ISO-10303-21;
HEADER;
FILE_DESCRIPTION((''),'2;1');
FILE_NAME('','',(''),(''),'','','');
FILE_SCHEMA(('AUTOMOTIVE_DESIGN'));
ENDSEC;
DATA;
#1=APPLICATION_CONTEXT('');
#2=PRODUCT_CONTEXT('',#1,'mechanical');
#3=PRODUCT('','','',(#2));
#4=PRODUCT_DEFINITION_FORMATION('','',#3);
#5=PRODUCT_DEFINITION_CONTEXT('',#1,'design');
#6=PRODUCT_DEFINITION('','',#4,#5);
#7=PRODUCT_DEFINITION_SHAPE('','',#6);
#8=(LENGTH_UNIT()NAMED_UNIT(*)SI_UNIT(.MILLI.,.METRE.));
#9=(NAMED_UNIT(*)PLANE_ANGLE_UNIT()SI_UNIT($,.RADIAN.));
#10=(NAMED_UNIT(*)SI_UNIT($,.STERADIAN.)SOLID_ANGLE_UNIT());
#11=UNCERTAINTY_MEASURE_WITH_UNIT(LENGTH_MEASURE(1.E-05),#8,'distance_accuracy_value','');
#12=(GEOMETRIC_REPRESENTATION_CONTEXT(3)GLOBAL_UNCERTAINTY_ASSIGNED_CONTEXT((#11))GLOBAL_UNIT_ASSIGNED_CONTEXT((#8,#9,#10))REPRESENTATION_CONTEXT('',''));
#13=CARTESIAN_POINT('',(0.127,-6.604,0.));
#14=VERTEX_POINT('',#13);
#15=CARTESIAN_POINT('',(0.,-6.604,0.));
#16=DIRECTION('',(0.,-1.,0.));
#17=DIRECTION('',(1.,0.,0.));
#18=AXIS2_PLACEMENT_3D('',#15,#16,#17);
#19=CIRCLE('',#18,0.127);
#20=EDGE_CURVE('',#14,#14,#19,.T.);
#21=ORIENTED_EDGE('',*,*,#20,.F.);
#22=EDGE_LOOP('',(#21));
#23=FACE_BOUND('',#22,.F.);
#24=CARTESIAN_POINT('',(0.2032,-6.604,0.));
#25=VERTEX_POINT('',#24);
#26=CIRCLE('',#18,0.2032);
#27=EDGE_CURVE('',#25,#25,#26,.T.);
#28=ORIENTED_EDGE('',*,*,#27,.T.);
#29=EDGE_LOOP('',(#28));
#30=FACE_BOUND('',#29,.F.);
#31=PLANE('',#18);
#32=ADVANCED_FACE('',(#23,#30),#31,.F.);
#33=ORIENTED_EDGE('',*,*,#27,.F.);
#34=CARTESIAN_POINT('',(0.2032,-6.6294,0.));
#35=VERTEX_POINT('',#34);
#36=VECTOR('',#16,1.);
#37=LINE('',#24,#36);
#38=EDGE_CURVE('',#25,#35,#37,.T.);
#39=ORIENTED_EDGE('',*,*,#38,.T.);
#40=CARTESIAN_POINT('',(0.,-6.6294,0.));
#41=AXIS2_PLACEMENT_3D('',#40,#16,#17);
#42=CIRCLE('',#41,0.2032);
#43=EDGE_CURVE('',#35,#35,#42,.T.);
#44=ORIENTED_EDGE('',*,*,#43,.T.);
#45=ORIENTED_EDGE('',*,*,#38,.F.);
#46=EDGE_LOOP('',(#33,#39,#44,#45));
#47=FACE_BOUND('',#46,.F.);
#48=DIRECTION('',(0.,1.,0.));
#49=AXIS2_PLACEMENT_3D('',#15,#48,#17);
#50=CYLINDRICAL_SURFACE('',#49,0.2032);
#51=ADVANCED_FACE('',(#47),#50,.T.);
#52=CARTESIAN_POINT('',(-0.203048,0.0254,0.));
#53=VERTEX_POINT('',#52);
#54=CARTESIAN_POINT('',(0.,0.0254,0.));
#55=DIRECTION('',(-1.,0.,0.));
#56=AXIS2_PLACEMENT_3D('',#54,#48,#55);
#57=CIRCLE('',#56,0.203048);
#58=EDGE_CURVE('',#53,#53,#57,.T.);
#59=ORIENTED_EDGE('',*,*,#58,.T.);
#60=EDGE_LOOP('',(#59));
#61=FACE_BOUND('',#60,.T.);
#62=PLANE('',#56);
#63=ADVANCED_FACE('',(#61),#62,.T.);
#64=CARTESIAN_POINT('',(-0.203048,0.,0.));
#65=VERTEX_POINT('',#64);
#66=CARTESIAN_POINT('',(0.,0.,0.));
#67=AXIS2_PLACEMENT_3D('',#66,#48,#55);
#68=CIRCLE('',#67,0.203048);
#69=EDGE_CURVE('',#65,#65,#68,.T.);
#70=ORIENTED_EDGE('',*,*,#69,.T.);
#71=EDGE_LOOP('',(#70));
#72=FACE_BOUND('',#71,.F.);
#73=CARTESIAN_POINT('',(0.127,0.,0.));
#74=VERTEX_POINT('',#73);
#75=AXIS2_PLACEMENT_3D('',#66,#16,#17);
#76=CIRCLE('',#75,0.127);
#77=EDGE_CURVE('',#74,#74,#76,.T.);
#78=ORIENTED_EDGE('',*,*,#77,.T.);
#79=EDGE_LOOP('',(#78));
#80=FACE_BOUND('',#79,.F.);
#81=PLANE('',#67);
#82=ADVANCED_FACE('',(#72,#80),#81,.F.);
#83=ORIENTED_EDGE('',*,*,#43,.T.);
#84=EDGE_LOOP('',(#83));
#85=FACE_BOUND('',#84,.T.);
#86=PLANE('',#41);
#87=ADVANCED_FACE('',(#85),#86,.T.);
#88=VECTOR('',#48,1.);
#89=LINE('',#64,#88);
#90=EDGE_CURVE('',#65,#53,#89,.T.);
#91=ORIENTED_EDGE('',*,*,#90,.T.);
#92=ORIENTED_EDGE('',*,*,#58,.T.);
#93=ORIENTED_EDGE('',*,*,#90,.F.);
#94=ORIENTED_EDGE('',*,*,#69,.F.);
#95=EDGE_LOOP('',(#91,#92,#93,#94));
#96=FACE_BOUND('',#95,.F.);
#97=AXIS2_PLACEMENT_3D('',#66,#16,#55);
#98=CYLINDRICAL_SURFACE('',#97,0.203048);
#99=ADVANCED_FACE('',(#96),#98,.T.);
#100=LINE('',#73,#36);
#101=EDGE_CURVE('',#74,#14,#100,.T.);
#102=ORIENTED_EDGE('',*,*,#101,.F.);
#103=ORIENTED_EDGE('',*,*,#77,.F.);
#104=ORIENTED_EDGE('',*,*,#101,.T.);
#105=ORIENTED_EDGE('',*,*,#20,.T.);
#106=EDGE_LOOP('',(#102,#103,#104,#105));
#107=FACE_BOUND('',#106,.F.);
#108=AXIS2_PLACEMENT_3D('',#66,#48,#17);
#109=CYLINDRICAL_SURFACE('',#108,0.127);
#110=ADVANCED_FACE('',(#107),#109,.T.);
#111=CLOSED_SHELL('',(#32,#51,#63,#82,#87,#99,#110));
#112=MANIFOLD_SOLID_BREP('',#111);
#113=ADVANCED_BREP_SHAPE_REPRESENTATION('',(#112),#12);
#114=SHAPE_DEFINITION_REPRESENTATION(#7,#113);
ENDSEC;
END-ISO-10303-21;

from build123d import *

# Parameters (mm, degrees)
F0_R     = 0.127
F1_DEPTH = 6.604
F2_R     = 0.2032
F2_R_2   = 0.127
F3_DEPTH = 0.0254
F4_R     = 0.2030483618
F4_R_2   = 0.127
F5_DEPTH = 0.0254


with BuildPart() as f1:
    # F0 (on Front) → F1 (new body)
    with BuildSketch(Plane.XZ):
        Circle(F0_R)
    extrude(amount=F1_DEPTH)

    # F2 (on face) → F3 (join)
    with BuildSketch(Plane.XZ.offset(6.604)):
        Circle(F2_R)
        Circle(F2_R_2, mode=Mode.SUBTRACT)
        Circle(F2_R_2)
    extrude(amount=F3_DEPTH)

    # F4 (on face) → F5 (join)
    with BuildSketch(Plane(origin=(0, 0, 0), x_dir=(-1, 0, 0), z_dir=(0, 1, 0))):
        Circle(F4_R)
        Circle(F4_R_2, mode=Mode.SUBTRACT)
        Circle(F4_R_2)
    extrude(amount=F5_DEPTH)


solid = f1.part
